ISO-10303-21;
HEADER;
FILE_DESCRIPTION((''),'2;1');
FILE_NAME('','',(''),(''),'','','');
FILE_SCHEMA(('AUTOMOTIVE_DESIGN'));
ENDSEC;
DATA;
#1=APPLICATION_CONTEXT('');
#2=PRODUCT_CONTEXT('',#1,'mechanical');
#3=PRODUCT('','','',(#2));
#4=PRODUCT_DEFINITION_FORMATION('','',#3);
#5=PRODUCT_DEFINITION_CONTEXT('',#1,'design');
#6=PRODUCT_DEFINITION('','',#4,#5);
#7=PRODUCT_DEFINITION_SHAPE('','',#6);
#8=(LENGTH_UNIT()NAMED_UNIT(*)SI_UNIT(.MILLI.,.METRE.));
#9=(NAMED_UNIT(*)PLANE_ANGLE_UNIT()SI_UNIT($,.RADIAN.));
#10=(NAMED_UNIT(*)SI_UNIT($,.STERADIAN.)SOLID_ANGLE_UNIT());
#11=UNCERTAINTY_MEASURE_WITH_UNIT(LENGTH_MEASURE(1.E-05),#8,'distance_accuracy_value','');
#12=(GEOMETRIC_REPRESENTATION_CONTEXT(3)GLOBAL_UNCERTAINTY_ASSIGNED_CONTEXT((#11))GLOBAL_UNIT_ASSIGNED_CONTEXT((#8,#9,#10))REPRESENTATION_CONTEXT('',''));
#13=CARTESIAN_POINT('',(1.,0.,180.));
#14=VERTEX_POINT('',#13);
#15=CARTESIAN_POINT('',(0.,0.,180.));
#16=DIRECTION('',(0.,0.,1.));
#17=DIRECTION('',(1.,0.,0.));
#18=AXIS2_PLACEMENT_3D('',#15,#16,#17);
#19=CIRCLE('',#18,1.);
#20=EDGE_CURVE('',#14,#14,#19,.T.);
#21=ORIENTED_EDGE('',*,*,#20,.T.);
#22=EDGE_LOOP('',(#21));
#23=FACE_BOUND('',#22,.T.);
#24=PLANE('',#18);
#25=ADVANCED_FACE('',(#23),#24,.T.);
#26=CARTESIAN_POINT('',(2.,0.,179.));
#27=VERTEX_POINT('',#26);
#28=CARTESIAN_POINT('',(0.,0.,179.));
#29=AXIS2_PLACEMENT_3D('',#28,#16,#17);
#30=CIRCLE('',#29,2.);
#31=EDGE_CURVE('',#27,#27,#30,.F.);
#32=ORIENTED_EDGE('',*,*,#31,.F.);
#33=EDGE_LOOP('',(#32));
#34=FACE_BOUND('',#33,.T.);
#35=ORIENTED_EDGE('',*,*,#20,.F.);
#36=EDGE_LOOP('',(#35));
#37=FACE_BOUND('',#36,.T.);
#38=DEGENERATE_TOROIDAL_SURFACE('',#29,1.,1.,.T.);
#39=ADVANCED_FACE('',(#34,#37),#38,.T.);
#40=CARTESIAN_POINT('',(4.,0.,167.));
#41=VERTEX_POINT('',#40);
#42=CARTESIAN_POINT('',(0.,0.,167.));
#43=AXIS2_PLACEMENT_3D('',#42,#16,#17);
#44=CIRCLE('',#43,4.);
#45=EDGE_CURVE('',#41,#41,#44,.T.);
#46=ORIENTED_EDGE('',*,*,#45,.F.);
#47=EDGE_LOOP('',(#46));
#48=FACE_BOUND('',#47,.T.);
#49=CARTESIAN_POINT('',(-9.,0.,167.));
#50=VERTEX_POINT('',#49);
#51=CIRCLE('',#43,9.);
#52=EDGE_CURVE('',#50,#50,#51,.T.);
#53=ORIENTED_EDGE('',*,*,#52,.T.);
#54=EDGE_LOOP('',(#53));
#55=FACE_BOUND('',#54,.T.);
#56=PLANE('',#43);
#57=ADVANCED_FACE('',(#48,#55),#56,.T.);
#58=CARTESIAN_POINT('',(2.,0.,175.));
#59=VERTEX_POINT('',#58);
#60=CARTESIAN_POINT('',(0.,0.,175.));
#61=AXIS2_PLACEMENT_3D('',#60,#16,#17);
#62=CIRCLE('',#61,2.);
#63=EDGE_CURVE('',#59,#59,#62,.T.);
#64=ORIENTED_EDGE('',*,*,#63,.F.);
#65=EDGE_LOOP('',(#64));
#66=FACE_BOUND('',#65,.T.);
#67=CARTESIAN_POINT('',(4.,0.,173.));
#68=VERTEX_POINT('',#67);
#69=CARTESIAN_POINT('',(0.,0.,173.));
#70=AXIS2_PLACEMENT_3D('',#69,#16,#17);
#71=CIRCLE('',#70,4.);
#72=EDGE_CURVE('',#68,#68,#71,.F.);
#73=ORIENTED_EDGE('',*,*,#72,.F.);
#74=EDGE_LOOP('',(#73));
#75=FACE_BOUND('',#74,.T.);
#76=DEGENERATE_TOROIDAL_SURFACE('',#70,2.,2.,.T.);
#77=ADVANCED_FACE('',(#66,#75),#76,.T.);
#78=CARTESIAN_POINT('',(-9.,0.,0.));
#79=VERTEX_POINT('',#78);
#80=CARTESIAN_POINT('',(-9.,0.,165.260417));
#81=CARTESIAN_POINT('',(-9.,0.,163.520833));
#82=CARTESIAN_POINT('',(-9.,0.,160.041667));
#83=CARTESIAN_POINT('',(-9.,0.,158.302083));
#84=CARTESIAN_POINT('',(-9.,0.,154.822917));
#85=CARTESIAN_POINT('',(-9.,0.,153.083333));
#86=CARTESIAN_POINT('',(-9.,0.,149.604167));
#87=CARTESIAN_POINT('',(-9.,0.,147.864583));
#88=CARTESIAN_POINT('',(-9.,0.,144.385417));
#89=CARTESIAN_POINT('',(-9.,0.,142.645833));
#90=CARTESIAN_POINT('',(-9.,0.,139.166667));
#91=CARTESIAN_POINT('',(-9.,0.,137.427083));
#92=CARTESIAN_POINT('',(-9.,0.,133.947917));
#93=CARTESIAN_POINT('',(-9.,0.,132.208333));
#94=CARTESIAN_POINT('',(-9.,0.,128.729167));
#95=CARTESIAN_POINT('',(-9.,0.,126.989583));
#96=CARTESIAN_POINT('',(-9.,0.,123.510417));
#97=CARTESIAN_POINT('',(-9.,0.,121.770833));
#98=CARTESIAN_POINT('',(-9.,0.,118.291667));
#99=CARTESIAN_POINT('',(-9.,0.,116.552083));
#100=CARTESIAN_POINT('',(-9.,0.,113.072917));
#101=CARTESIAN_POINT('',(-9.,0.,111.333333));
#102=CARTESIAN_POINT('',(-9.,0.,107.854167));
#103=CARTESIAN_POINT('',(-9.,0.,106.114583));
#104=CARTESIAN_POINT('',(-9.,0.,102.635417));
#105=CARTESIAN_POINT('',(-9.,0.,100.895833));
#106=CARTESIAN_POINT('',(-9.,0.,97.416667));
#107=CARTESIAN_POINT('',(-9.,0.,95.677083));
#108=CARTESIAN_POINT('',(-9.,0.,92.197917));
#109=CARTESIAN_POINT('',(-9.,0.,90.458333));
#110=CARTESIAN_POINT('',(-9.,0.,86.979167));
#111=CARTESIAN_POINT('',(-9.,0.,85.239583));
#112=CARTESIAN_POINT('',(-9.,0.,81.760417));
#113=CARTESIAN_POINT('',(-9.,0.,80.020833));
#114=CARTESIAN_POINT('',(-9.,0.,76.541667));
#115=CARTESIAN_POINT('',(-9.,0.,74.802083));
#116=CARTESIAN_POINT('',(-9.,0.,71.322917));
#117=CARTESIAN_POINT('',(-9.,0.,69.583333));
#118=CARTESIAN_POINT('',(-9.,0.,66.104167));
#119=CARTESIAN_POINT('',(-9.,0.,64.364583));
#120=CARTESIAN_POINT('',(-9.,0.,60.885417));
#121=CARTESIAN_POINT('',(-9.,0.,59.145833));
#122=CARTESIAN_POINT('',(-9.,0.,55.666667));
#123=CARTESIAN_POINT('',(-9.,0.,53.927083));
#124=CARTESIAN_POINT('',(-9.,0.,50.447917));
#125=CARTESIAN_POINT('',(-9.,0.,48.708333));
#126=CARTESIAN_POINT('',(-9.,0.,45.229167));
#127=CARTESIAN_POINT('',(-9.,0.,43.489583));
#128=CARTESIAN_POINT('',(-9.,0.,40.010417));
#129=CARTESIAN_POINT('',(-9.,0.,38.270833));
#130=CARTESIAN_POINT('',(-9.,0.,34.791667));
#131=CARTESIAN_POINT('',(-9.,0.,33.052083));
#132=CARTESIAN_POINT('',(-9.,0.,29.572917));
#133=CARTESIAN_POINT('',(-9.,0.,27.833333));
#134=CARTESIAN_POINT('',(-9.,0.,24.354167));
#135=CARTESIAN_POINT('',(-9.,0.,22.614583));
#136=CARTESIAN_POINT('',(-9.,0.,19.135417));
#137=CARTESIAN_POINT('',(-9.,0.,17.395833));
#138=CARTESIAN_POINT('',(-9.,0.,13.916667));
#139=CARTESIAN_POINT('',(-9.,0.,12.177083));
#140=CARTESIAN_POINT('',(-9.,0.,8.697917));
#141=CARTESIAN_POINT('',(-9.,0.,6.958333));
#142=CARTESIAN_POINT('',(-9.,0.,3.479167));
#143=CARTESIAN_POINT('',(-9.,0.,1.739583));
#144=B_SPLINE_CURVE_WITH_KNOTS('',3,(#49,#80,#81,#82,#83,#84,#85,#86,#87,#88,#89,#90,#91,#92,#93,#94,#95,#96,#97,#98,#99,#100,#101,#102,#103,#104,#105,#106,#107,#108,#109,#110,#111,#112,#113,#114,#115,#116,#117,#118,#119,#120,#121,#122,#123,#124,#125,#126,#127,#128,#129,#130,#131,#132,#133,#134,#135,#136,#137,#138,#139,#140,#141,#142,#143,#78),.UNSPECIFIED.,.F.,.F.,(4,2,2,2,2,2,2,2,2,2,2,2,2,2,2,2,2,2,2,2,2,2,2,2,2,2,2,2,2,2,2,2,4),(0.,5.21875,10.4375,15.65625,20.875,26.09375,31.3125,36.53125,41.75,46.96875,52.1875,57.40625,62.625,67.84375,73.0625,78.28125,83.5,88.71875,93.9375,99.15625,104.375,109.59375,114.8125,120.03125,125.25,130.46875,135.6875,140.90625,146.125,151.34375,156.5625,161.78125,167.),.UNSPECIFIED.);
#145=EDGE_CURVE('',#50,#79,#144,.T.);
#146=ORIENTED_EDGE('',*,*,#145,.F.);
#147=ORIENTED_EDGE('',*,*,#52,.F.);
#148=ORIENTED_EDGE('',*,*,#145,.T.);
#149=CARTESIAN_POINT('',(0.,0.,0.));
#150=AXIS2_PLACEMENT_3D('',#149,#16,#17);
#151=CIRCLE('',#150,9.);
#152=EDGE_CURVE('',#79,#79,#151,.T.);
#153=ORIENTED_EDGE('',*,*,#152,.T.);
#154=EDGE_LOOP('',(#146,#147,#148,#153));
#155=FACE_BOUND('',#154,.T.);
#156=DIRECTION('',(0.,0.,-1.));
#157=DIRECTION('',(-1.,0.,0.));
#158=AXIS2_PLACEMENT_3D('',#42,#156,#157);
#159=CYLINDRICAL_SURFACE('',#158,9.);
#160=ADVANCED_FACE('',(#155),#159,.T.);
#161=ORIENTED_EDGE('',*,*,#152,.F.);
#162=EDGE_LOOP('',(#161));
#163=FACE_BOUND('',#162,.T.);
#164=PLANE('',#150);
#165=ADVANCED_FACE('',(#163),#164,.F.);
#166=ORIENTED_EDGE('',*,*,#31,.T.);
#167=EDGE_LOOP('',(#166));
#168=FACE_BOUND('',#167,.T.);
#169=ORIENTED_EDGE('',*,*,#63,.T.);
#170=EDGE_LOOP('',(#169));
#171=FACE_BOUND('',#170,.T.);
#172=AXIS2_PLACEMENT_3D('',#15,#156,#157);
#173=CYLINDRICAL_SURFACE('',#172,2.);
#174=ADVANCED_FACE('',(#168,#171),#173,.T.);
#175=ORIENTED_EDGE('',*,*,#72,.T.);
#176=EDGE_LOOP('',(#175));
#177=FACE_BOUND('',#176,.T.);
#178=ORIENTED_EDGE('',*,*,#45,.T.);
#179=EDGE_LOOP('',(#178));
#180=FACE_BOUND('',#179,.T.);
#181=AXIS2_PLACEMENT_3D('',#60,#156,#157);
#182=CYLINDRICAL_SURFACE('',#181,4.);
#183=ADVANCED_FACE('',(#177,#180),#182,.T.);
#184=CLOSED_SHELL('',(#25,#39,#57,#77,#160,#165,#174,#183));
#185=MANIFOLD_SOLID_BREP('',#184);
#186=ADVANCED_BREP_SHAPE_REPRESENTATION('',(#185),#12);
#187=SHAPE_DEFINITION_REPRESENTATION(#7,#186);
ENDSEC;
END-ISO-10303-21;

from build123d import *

# Parameters (mm, degrees)
SKETCH_1_R      = 9
EXTRUDE_1_DEPTH = 167
SKETCH_2_R      = 4
EXTRUDE_2_DEPTH = 8
SKETCH_3_R      = 2
EXTRUDE_3_DEPTH = 5
FILLET_1_R      = 2
FILLET_2_R      = 1


with BuildPart() as part:
    # Эскиз1 → Бобышка-Вытянуть1 (new body)
    with BuildSketch(Plane.XY):
        with Locations(Location((0, 0, 0), (0, 0, 180))):
            Circle(SKETCH_1_R)
    extrude(amount=EXTRUDE_1_DEPTH)

    # Эскиз2 → Бобышка-Вытянуть2 (add)
    with BuildSketch(Plane.XY.offset(167)):
        Circle(SKETCH_2_R)
    extrude(amount=EXTRUDE_2_DEPTH)

    # Эскиз3 → Бобышка-Вытянуть3 (add)
    with BuildSketch(Plane.XY.offset(175)):
        Circle(SKETCH_3_R)
    extrude(amount=EXTRUDE_3_DEPTH)

    # Скругление1
    fillet_1_edges = [part.edges().sort_by_distance(p)[0] for p in [
        (-4, 0, 175),
    ]]
    fillet(fillet_1_edges, radius=FILLET_1_R - 0.0001)  # a hair under: the kernel refuses the full size

    # Скругление2
    fillet_2_edges = [part.edges().sort_by_distance(p)[0] for p in [
        (-2, 0, 180),
    ]]
    fillet(fillet_2_edges, radius=FILLET_2_R)


solid = part.part
